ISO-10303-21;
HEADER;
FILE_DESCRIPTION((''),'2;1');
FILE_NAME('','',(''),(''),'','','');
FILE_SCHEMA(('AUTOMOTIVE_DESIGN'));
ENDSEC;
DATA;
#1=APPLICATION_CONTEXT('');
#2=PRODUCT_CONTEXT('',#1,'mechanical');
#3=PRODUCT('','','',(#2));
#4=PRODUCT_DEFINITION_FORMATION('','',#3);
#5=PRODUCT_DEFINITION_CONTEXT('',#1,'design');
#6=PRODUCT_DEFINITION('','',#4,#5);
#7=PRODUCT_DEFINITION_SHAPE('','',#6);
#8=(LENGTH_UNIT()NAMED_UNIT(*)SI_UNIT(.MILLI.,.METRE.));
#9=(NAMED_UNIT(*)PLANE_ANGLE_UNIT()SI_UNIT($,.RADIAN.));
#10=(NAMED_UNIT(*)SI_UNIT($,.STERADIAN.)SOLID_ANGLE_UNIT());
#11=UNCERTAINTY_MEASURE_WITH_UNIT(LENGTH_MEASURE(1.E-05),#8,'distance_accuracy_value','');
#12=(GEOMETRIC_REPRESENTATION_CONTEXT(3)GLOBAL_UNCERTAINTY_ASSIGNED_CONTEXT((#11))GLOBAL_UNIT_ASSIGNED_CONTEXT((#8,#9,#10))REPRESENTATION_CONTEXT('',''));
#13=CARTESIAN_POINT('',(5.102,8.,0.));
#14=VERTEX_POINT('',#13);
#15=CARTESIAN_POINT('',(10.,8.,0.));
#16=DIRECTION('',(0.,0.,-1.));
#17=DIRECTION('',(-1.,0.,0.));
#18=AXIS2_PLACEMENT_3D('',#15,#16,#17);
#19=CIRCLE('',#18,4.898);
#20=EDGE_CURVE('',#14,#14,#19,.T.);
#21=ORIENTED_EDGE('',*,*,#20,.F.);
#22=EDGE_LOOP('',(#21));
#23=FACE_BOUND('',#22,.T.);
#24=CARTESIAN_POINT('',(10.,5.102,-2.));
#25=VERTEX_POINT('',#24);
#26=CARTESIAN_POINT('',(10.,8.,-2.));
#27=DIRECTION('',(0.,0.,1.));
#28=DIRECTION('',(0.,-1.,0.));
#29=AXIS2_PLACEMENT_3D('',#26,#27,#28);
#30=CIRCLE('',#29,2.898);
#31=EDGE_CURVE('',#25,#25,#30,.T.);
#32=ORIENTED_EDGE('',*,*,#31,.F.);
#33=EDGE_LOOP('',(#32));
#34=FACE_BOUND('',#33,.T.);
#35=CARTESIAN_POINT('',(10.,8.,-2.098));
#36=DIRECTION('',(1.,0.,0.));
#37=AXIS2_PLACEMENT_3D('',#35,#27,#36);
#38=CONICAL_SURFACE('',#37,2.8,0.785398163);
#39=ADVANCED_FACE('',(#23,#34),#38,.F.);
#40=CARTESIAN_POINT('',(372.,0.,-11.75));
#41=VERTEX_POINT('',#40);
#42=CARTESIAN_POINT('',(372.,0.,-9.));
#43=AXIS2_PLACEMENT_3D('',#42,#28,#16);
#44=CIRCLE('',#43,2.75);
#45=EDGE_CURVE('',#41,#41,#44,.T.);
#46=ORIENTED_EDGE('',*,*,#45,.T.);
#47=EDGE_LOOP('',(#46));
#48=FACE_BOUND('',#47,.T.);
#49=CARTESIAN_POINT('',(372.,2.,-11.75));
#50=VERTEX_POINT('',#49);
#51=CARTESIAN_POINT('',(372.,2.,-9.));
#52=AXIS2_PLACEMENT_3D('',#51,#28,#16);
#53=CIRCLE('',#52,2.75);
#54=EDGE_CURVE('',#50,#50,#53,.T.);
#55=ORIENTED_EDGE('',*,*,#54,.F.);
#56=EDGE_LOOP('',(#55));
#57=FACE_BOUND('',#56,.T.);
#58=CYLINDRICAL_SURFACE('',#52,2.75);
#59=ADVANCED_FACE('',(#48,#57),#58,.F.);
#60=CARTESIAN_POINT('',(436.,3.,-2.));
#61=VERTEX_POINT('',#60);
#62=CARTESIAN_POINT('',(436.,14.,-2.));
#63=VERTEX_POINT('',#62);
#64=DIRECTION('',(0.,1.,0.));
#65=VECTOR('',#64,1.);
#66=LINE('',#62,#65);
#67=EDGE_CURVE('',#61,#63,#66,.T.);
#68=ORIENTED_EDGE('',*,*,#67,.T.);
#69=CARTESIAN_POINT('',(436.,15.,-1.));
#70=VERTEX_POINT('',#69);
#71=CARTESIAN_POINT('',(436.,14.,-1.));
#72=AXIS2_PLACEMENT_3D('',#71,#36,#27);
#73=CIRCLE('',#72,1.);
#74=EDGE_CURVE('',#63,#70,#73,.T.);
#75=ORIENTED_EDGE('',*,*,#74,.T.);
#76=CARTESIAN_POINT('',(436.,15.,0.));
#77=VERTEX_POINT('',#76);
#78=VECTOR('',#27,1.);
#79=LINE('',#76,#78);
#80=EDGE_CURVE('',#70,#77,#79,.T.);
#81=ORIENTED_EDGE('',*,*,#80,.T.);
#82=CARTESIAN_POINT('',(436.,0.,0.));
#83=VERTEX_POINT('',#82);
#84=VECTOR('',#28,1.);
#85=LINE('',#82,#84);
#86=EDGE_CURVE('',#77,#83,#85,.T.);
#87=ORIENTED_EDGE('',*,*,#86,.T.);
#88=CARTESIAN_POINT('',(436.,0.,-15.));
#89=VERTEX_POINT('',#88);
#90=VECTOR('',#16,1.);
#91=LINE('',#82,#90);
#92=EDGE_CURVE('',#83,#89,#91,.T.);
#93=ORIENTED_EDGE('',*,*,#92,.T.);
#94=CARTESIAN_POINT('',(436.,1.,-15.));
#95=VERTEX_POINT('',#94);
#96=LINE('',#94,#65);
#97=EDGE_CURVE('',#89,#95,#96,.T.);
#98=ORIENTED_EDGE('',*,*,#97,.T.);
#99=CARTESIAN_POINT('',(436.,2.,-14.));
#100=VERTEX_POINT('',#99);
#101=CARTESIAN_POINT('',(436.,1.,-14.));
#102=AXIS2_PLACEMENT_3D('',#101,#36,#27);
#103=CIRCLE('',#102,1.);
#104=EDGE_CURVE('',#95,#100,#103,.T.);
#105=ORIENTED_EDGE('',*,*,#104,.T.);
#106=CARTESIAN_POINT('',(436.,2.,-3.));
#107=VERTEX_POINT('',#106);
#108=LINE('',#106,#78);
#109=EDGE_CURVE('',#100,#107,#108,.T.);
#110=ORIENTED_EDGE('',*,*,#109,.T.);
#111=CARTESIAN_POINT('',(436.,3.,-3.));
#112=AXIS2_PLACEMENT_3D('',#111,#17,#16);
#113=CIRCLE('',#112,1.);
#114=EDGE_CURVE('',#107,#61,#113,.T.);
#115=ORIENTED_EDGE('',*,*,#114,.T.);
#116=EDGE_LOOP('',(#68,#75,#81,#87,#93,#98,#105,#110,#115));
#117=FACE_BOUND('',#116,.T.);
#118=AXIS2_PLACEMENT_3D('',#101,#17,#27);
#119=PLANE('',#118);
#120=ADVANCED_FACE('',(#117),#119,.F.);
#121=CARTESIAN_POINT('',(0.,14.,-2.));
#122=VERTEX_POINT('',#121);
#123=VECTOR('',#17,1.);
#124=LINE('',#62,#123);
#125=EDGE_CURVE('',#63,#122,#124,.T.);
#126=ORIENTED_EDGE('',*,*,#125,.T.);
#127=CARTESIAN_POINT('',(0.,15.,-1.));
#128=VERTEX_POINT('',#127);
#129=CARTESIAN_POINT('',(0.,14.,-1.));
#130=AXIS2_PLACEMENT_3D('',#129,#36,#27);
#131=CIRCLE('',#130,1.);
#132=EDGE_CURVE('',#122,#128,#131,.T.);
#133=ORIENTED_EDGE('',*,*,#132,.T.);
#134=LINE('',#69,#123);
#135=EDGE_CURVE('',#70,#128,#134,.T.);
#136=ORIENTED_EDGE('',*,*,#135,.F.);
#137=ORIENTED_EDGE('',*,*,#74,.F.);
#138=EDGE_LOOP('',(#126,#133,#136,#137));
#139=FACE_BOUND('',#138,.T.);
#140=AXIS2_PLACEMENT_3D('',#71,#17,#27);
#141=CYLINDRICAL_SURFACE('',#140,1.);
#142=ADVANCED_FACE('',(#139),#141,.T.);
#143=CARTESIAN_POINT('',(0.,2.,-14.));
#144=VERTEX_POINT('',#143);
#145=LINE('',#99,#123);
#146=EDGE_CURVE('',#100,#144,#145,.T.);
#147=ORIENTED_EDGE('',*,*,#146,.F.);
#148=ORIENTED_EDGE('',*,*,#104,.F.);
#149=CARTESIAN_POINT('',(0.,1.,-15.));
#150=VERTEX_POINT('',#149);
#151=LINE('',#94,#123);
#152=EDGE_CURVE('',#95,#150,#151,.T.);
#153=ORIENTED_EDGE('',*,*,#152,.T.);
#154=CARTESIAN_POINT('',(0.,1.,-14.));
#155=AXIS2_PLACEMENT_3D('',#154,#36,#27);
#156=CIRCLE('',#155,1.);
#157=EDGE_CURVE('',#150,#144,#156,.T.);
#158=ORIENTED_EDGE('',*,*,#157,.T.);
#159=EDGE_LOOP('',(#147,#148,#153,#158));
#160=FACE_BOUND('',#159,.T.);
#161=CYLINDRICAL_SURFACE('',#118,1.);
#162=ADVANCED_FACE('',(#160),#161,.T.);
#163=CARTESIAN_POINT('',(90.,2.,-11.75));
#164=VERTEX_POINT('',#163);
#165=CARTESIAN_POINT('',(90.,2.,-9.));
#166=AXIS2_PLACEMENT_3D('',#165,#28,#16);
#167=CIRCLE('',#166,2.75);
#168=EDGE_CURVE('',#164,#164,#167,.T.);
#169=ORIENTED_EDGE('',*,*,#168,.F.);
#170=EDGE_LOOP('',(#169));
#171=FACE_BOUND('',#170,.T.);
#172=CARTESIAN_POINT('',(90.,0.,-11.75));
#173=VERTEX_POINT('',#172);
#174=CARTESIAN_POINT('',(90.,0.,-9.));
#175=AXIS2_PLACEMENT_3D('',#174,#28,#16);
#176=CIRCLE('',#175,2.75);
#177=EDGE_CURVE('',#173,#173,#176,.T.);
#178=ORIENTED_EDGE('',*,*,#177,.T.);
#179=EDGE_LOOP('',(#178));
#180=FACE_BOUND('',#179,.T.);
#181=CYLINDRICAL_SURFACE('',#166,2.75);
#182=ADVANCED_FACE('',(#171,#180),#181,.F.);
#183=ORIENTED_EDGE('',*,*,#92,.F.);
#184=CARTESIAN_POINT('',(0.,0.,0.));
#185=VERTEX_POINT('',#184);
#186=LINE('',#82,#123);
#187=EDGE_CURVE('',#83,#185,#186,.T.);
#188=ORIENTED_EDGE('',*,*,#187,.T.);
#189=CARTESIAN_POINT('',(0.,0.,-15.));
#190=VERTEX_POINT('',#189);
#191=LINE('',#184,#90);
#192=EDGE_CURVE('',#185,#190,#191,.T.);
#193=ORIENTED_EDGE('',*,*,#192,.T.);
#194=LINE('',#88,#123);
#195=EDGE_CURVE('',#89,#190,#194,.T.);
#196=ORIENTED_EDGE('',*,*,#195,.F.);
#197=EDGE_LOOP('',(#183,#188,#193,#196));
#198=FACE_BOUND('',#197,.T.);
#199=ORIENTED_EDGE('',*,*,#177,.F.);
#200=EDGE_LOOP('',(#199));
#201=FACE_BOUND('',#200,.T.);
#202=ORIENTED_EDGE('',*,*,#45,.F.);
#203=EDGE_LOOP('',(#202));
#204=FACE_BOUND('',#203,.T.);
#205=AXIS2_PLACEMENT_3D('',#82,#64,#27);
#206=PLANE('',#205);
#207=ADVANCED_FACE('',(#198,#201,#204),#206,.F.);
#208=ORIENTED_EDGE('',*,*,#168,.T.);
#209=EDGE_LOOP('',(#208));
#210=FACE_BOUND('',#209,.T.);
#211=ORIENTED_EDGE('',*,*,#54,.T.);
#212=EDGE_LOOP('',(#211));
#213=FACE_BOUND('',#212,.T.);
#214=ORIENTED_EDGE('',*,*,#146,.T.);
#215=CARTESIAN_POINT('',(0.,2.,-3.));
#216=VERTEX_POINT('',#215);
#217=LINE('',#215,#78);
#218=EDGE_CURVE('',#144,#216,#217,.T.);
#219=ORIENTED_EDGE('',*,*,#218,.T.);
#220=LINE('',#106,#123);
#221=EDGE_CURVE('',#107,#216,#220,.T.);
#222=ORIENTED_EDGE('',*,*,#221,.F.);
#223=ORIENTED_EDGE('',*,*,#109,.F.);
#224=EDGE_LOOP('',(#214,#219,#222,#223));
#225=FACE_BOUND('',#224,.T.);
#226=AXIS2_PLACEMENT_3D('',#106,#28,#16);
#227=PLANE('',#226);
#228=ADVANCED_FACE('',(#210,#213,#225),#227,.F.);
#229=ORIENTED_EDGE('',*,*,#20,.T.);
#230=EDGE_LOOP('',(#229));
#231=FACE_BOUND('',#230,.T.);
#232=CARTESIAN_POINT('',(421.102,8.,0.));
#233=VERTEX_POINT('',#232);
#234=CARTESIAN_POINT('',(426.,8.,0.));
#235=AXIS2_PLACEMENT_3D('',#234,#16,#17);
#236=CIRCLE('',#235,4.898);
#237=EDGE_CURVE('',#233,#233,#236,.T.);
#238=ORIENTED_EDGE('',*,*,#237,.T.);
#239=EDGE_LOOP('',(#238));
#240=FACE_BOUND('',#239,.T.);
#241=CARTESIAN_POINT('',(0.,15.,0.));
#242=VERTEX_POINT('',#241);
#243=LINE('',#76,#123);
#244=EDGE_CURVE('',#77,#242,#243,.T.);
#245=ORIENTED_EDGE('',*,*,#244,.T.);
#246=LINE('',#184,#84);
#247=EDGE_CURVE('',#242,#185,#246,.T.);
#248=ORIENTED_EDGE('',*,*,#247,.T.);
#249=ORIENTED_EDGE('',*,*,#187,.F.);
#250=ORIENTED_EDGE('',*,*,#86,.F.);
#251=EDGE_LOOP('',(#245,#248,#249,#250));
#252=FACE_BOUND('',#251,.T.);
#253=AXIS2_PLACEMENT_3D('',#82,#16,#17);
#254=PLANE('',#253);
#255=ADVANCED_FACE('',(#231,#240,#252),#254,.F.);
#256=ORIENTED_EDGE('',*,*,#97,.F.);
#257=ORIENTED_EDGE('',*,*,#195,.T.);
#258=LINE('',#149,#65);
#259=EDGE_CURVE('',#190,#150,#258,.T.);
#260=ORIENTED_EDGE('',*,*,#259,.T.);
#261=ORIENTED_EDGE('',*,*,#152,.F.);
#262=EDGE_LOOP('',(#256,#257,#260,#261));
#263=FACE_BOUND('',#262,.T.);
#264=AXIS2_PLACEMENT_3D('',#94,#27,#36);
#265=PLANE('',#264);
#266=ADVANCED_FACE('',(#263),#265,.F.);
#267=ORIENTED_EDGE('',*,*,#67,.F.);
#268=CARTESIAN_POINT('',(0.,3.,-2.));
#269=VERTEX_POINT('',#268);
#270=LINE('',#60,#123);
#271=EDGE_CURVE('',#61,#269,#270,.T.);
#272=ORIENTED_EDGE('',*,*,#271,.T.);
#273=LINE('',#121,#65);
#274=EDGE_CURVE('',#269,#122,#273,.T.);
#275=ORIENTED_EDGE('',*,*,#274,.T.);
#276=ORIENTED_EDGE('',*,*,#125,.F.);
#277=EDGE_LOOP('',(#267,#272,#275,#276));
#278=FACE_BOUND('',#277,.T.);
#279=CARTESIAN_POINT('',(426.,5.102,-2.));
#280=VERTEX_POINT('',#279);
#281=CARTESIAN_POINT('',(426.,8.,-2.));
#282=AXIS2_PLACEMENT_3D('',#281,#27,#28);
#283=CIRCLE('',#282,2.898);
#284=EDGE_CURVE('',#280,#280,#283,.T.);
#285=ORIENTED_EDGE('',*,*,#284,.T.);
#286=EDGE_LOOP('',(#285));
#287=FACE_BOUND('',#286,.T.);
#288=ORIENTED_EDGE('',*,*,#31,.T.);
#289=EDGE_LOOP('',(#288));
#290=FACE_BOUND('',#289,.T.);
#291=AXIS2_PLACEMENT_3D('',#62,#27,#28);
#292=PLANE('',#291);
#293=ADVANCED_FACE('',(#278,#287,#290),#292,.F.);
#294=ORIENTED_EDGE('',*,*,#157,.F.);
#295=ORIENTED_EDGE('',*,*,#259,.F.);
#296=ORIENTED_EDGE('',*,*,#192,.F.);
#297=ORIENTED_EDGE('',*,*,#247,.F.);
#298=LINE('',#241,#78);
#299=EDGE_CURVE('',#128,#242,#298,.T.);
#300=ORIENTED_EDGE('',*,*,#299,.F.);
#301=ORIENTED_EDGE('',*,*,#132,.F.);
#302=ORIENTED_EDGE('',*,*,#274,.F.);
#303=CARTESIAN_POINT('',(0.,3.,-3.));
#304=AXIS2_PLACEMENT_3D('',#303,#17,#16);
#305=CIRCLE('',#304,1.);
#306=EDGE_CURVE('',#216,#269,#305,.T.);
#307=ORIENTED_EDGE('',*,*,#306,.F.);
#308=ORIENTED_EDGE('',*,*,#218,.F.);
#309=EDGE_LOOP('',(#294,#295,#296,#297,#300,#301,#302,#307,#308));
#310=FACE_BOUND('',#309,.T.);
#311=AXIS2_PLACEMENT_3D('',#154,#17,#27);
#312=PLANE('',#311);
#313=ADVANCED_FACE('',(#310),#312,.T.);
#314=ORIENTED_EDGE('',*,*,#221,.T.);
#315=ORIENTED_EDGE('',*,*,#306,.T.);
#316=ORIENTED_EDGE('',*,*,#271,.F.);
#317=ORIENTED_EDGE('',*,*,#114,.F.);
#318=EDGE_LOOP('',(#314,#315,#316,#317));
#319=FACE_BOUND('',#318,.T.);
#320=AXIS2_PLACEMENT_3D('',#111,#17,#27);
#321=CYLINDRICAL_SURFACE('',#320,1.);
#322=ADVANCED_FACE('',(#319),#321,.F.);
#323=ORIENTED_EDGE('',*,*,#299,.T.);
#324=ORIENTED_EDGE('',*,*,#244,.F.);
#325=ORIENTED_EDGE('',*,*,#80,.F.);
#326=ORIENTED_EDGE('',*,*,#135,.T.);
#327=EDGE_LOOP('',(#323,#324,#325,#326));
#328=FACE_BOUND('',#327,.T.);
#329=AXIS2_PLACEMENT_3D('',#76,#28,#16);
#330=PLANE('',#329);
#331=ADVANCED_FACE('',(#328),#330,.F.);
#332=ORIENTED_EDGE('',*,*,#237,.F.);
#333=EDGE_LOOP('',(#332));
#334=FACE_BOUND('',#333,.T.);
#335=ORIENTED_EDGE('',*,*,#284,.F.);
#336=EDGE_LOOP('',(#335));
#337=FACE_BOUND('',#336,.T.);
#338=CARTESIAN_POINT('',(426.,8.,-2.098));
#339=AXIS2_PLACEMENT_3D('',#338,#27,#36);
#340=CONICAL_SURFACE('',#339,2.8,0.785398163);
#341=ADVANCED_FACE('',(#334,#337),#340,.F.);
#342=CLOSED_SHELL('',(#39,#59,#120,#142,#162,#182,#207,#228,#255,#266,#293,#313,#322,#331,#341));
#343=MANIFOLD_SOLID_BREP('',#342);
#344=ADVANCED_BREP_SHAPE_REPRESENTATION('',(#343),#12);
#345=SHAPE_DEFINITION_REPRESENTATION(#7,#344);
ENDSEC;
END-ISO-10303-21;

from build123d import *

# Parameters (mm, degrees)
EXTRUDE_1_DEPTH     = 436
SKETCH_4_R          = 2.75
CUT_EXTRUDE_3_DEPTH = 2
SKETCH_9_R          = 2.8
CUT_EXTRUDE_8_DEPTH = 437.515750002
CHAMFER_4_SIZE      = 2.098


with BuildPart() as part:
    # Эскиз1 → Бобышка-Вытянуть1 (new body)
    with BuildSketch(Plane(origin=(0, 0, 0), x_dir=(0, 0, -1), z_dir=(1, 0, 0))):
        with BuildLine():
            Line((0, 0), (0, 15))
            Line((0, 15), (1, 15))
            ThreePointArc((1, 15), (1.707106781, 14.707106781), (2, 14))
            Line((2, 14), (2, 3))
            ThreePointArc((2, 3), (2.292893219, 2.292893219), (3, 2))
            Line((3, 2), (14, 2))
            ThreePointArc((14, 2), (14.707106781, 1.707106781), (15, 1))
            Line((15, 1), (15, 0))
            Line((15, 0), (0, 0))
        make_face()
    extrude(amount=EXTRUDE_1_DEPTH)

    # Эскиз4 → Вырез-Вытянуть3 (cut)
    with BuildSketch(Plane.XZ):
        with Locations(Location((372, -9, 0), (0, 0, 270))):
            Circle(SKETCH_4_R)
        with Locations(Location((90, -9, 0), (0, 0, 270))):
            Circle(SKETCH_4_R)
    extrude(amount=-CUT_EXTRUDE_3_DEPTH, mode=Mode.SUBTRACT)

    # Эскиз9 → Вырез-Вытянуть8 (cut, through all)
    with BuildSketch(Plane.XY):
        with Locations((426, 8)):
            Circle(SKETCH_9_R)
        with Locations((10, 8)):
            Circle(SKETCH_9_R)
    extrude(amount=-CUT_EXTRUDE_8_DEPTH, mode=Mode.SUBTRACT)

    # Фаска4
    # the kernel refuses this chamfer: 2.098 mm, written as the material it takes off along each edge
    with BuildSketch(Plane(origin=(10, 8, 0), x_dir=(1, 0, 0), z_dir=(0, -1, 0))) as chamfer_4_piece_1:
        Polygon((2.8 + CHAMFER_4_SIZE, 0), (2.8, -CHAMFER_4_SIZE), (2.8, 0), align=None)
    revolve(axis=Axis((10, 8, 0), (0, 0, 1)), mode=Mode.SUBTRACT)
    with BuildSketch(Plane(origin=(426, 8, 0), x_dir=(1, 0, 0), z_dir=(0, -1, 0))) as chamfer_4_piece_2:
        Polygon((2.8 + CHAMFER_4_SIZE, 0), (2.8, -CHAMFER_4_SIZE), (2.8, 0), align=None)
    revolve(axis=Axis((426, 8, 0), (0, 0, 1)), mode=Mode.SUBTRACT)


solid = part.part
